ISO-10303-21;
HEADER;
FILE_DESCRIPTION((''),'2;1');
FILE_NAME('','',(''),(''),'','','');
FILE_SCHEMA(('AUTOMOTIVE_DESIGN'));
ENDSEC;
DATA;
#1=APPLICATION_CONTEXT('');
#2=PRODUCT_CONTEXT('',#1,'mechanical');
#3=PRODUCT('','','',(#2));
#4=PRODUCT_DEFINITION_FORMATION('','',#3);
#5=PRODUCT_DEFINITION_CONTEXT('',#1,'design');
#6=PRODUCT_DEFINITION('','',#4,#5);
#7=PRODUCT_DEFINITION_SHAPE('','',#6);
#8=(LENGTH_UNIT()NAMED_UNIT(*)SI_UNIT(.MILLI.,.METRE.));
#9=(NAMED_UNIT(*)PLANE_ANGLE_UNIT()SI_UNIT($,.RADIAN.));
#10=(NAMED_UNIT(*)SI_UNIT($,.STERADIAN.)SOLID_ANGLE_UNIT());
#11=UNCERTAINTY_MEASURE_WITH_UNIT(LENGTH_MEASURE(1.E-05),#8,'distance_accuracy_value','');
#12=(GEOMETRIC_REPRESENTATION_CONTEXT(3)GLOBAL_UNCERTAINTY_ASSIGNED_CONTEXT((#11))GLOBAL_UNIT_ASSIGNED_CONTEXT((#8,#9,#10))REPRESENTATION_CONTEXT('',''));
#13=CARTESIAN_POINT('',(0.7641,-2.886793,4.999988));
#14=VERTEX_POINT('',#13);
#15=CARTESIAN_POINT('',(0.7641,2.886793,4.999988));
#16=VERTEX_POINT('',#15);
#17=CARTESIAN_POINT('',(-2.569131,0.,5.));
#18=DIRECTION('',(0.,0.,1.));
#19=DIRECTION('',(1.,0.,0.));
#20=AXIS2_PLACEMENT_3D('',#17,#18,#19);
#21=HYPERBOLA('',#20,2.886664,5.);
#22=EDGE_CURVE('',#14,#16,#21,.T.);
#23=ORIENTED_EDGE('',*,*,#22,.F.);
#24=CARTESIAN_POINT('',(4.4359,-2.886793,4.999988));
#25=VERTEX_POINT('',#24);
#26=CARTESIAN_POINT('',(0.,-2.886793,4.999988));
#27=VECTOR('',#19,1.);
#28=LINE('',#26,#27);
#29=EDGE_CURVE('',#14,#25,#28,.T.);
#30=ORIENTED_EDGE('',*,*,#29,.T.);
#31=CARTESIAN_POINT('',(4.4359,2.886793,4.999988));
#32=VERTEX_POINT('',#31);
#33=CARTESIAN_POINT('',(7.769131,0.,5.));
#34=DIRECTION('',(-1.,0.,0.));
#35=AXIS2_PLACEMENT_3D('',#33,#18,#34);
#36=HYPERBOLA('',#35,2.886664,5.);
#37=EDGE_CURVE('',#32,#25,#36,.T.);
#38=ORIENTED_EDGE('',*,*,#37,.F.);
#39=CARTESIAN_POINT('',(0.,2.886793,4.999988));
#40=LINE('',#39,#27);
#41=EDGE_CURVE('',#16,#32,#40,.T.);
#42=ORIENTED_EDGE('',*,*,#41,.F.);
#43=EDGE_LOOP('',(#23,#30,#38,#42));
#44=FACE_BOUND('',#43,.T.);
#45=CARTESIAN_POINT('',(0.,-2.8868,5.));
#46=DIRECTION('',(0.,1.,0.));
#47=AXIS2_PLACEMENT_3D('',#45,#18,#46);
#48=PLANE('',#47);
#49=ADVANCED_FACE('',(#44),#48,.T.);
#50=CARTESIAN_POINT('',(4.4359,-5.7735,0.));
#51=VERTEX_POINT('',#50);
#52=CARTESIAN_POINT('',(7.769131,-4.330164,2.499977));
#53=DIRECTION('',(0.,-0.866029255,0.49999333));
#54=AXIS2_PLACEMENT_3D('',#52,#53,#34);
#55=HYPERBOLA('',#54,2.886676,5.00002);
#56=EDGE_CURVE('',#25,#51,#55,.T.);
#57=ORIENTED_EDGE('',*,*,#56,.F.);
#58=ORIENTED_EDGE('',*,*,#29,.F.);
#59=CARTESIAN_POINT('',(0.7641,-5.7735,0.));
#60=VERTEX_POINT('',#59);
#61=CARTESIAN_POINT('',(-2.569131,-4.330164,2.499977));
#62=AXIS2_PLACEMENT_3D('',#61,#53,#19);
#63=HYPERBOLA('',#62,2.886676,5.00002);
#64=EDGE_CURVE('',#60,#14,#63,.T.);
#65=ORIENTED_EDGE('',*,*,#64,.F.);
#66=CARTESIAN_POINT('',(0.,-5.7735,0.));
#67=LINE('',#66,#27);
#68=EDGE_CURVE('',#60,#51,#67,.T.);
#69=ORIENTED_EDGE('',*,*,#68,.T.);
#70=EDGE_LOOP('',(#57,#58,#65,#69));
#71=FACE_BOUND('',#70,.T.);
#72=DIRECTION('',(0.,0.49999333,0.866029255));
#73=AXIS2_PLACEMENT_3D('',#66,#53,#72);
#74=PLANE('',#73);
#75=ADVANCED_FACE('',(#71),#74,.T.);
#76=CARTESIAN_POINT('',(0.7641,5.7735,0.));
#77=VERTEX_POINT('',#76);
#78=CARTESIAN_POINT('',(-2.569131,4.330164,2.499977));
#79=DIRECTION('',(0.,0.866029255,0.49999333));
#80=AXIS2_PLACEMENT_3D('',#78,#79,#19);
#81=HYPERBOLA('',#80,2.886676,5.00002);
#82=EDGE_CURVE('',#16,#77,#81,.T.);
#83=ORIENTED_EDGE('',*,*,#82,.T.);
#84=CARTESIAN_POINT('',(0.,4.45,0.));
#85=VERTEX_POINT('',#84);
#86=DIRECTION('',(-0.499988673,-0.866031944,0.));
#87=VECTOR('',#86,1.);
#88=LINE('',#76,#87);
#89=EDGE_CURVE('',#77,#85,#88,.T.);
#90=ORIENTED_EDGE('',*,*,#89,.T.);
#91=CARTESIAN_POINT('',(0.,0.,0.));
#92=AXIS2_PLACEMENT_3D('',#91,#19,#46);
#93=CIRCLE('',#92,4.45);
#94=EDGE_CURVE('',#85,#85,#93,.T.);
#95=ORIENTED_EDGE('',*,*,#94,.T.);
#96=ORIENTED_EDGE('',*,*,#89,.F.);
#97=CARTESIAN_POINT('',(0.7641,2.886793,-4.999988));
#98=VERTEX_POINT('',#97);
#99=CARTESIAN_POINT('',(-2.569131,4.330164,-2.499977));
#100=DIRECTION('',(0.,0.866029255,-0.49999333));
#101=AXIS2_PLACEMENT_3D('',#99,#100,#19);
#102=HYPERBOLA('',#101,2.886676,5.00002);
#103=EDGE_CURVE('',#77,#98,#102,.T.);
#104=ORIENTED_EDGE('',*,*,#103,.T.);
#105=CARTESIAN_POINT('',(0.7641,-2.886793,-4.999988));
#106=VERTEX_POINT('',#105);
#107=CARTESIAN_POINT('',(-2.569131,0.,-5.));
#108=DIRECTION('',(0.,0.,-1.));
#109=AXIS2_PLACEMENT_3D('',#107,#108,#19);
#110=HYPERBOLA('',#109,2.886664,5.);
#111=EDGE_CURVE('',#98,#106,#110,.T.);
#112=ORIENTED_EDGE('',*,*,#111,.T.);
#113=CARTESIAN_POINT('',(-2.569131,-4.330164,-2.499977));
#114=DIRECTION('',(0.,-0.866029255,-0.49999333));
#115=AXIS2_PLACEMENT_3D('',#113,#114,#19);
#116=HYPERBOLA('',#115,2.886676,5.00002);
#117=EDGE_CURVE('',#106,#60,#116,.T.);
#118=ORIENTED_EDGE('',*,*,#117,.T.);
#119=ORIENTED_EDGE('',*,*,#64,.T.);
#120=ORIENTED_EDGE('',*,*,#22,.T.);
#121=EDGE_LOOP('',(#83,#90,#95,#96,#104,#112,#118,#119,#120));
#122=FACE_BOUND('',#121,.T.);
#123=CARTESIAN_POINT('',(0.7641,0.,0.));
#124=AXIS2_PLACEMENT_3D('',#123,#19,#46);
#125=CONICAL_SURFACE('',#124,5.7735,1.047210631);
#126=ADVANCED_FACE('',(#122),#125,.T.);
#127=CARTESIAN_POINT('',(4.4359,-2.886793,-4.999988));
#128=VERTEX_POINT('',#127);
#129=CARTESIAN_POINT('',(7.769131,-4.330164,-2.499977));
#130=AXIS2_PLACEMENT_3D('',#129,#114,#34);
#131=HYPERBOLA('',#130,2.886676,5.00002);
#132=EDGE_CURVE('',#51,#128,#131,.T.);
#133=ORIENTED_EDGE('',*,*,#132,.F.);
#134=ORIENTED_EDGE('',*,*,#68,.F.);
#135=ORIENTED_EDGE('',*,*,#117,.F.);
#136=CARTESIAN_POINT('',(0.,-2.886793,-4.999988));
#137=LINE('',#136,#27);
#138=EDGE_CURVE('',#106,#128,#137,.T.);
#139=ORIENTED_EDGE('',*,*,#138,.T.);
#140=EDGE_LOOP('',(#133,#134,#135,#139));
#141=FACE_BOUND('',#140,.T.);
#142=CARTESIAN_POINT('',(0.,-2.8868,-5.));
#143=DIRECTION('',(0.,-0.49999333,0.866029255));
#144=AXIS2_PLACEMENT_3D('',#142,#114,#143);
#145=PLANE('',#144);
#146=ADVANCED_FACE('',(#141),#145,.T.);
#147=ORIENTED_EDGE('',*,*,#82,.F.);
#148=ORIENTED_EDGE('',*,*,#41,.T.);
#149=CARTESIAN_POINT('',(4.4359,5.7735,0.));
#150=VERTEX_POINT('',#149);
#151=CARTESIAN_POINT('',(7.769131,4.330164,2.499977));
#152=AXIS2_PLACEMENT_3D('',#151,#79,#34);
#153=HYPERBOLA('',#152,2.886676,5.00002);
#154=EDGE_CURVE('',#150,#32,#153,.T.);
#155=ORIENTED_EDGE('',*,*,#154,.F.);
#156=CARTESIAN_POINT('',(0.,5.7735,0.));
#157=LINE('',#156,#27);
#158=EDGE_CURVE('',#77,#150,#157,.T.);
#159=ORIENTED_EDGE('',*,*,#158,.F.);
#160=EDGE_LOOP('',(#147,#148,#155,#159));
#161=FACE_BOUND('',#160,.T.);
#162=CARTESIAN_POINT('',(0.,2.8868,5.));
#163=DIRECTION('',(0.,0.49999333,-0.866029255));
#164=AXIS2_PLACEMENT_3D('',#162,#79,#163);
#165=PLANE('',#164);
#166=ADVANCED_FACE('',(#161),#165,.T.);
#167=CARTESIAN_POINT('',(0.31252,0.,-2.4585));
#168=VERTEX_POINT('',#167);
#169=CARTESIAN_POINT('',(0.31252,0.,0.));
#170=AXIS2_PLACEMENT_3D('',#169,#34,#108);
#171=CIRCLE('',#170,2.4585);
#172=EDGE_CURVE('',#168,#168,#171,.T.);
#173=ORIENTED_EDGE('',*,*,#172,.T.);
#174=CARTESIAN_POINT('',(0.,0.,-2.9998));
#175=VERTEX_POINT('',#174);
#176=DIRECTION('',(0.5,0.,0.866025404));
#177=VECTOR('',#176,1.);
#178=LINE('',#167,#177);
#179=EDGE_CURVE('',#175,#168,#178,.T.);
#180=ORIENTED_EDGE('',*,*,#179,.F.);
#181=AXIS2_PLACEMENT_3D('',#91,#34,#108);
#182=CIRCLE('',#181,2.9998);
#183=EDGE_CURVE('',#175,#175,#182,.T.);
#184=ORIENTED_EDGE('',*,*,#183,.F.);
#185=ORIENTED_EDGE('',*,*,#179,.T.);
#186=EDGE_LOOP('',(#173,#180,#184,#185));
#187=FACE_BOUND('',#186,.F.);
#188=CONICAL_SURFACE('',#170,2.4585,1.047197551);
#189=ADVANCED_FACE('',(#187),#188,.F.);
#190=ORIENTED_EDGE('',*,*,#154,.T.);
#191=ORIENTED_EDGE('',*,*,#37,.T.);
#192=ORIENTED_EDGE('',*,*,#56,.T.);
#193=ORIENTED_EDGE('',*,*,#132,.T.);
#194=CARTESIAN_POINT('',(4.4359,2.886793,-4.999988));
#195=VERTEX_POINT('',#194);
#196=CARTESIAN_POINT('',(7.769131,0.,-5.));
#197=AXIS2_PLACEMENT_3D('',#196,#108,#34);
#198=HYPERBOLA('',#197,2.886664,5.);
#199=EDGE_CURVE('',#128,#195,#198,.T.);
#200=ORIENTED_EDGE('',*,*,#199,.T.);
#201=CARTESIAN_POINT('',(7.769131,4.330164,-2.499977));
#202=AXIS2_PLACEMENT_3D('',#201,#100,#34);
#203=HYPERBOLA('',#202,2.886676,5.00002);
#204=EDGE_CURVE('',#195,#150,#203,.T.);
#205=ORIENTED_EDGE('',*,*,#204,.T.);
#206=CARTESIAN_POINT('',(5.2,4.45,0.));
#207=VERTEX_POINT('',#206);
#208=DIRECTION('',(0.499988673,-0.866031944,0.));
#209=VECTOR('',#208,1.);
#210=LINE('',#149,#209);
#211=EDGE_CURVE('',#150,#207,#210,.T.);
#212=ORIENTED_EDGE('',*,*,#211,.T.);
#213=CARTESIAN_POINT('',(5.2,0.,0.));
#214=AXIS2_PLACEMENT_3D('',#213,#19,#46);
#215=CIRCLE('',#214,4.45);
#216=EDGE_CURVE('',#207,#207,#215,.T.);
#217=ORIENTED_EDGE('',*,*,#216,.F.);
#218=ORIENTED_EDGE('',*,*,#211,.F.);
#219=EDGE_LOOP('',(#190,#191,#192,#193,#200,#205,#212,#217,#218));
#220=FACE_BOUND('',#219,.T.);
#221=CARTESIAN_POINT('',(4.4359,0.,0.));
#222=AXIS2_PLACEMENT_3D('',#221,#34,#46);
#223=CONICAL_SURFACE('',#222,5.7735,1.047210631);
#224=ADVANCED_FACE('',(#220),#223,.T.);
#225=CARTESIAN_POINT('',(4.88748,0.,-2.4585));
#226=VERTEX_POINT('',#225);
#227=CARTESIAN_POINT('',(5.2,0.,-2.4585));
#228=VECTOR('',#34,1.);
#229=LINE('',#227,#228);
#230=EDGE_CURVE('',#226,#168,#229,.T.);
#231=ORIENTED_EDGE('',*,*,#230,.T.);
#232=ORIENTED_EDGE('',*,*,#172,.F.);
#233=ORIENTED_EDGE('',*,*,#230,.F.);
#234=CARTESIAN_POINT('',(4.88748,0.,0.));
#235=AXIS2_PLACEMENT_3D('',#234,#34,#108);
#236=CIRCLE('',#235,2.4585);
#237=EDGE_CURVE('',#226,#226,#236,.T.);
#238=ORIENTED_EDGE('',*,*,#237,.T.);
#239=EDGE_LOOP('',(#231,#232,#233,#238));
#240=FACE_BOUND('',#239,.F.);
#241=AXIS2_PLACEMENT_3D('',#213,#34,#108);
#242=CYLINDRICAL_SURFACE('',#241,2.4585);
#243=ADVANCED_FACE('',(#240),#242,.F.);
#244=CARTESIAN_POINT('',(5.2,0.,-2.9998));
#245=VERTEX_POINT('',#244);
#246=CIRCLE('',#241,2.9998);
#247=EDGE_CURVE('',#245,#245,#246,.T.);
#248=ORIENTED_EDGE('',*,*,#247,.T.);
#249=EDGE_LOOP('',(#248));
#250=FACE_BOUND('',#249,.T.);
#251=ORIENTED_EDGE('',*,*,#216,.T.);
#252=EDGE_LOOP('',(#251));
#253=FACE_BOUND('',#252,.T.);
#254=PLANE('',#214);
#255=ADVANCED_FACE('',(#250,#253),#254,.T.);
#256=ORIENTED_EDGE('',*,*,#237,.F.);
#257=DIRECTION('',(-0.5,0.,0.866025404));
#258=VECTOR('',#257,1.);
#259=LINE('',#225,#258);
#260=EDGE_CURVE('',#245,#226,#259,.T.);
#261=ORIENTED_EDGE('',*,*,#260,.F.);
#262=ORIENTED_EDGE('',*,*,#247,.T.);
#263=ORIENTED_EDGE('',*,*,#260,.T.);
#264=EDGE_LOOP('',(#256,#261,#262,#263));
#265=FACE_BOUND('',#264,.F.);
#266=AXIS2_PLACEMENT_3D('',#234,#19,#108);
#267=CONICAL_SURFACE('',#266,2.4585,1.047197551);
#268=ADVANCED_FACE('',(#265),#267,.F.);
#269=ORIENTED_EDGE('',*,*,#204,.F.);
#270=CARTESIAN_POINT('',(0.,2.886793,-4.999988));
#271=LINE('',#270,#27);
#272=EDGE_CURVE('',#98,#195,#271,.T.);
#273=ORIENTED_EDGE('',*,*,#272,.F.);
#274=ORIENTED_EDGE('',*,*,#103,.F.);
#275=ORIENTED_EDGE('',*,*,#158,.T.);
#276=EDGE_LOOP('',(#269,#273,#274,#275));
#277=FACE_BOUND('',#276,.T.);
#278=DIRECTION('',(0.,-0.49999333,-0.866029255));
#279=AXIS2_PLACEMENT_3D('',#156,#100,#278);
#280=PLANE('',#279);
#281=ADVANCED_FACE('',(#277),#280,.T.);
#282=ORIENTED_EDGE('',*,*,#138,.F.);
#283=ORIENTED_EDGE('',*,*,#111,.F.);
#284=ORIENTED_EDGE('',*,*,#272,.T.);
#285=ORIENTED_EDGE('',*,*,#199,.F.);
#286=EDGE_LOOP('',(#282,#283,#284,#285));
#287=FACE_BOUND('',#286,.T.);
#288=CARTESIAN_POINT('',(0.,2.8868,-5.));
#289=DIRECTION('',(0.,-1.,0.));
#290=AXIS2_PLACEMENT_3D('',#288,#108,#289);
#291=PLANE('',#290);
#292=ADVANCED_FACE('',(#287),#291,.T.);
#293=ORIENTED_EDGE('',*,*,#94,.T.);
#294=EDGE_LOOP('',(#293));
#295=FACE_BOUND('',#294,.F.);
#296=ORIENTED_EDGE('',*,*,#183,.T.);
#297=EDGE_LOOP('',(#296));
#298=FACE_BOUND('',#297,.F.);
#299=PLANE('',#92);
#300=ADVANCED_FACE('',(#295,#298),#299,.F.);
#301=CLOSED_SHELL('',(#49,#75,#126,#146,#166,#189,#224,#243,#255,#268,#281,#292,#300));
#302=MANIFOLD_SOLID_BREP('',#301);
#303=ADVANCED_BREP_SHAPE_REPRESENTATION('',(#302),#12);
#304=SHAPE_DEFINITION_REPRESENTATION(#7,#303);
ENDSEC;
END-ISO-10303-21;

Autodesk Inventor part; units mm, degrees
ref_plane "YZ Plane" through (0, 0, 0) normal (1, 0, 0) x (0, 1, 0)
ref_plane "XZ Plane" through (0, 0, 0) normal (0, 1, 0) x (-1, 0, 0)
sketch "스케치1" plane through (0, 0, 0) normal (1, 0, 0) x (0, 1, 0)
  line L0 (-5.7735, 0) -> (-2.8868, 5)
  line L1 (-2.8868, 5) -> (2.8868, 5)
  line L2 (2.8868, 5) -> (5.7735, 0)
  line L3 (5.7735, 0) -> (2.8868, -5)
  line L4 (2.8868, -5) -> (-2.8868, -5)
  line L5 (-2.8868, -5) -> (-5.7735, 0)
  point P0 (0, 0)
  point P1 (0, 0)
  dimension "d0" = 11.547
extrude "본체" add sketch "스케치1" along normal blind 5.2
sketch "스케치2" plane through (0, 0, 0) normal (0, 0, 1) x (1, 0, 0)
  line L0 (0, 2.8868) -> (0, 5.7735) projected
  line L1 (0, 5.7735) -> (5.2, 5.7735) projected
  line L2 (5.2, 2.8868) -> (5.2, 5.7735) projected
  line L3 (-1.04, 0) -> (6.24, 0) projected
  line L4 (0.7641, 5.7735) -> (0, 4.45)
  line L5 (4.4359, 5.7735) -> (5.2, 4.45)
  dimension "d3" = 30
  dimension "d4" = 30
  dimension "d5" = 8.9
  dimension "d6" = 8.9
revolve "모따기1" cut sketch "스케치2" angle 360 about axis through (-10, 0, 0) along (1, 0, 0)
sketch "스케치3" plane through (5.2, 0, 0) normal (1, 0, 0) x (0, 0, -1)
  arc A0 (-0.625, -1.0825) -> (0.625, -1.0825) centre (0, 0) ccw projected
hole "스레드" at (5.2, 0, 0) direction (-1, 0, 0) diameter 4.917 end through all thread size "M6x1" class "6H" standard "ISO Metric profile"
chamfer "모따기2" distance 0.5413 angle 30 1 edges at (5.2, 0, 2.4585) measured on face at (5.2, 3.7371, -0.4538)
chamfer "모따기3" distance 0.5413 angle 30 1 edges at (0, 0, 2.4585) measured on face at (0, 3.7371, -0.4538)
ref_plane "Work Plane1" through (-10.9812, 0, 0) normal (0, -0.8660254, -0.5) x (1, 0, 0)
equation "\"d0\" = 1.1547 * SW"
equation "\"d1\" = KOH"
equation "\"d8\" = -0.5 * GD1 + 0.5 * NND"
equation "\"d40\" = -0.5 * GD1 + 0.5 * NND"
equation "\"d10\" = -0.5 * GD1 + 0.5 * NND"
equation "\"d41\" = -0.5 * GD1 + 0.5 * NND"
equation "\"d3\" = ANG1"
equation "\"d4\" = ANG2"
equation "\"d5\" = SW0"
equation "\"d6\" = SW01"
equation "\"ANG1\" = 30deg"
equation "\"ANG2\" = 30deg"
equation "\"NND\" = 6"
equation "\"KOH\" = 5.2"
equation "\"SW0\" = 8.9"
equation "\"SW01\" = SW0"
equation "\"GUL\" = 0.541266 * PTC"
equation "\"THREADDIA\" = 6"
equation "\"TOA\" = 30deg"
equation "\"PTC\" = 1"
equation "\"E0\" = 1.155 * SW"
equation "\"GAL\" = 0.541266 * PTC"
equation "\"SW\" = 10"
equation "\"GD1\" = 4.917468"
properties part number "ISO 4032 - M6" material "스테인리스스틸, 440C"
